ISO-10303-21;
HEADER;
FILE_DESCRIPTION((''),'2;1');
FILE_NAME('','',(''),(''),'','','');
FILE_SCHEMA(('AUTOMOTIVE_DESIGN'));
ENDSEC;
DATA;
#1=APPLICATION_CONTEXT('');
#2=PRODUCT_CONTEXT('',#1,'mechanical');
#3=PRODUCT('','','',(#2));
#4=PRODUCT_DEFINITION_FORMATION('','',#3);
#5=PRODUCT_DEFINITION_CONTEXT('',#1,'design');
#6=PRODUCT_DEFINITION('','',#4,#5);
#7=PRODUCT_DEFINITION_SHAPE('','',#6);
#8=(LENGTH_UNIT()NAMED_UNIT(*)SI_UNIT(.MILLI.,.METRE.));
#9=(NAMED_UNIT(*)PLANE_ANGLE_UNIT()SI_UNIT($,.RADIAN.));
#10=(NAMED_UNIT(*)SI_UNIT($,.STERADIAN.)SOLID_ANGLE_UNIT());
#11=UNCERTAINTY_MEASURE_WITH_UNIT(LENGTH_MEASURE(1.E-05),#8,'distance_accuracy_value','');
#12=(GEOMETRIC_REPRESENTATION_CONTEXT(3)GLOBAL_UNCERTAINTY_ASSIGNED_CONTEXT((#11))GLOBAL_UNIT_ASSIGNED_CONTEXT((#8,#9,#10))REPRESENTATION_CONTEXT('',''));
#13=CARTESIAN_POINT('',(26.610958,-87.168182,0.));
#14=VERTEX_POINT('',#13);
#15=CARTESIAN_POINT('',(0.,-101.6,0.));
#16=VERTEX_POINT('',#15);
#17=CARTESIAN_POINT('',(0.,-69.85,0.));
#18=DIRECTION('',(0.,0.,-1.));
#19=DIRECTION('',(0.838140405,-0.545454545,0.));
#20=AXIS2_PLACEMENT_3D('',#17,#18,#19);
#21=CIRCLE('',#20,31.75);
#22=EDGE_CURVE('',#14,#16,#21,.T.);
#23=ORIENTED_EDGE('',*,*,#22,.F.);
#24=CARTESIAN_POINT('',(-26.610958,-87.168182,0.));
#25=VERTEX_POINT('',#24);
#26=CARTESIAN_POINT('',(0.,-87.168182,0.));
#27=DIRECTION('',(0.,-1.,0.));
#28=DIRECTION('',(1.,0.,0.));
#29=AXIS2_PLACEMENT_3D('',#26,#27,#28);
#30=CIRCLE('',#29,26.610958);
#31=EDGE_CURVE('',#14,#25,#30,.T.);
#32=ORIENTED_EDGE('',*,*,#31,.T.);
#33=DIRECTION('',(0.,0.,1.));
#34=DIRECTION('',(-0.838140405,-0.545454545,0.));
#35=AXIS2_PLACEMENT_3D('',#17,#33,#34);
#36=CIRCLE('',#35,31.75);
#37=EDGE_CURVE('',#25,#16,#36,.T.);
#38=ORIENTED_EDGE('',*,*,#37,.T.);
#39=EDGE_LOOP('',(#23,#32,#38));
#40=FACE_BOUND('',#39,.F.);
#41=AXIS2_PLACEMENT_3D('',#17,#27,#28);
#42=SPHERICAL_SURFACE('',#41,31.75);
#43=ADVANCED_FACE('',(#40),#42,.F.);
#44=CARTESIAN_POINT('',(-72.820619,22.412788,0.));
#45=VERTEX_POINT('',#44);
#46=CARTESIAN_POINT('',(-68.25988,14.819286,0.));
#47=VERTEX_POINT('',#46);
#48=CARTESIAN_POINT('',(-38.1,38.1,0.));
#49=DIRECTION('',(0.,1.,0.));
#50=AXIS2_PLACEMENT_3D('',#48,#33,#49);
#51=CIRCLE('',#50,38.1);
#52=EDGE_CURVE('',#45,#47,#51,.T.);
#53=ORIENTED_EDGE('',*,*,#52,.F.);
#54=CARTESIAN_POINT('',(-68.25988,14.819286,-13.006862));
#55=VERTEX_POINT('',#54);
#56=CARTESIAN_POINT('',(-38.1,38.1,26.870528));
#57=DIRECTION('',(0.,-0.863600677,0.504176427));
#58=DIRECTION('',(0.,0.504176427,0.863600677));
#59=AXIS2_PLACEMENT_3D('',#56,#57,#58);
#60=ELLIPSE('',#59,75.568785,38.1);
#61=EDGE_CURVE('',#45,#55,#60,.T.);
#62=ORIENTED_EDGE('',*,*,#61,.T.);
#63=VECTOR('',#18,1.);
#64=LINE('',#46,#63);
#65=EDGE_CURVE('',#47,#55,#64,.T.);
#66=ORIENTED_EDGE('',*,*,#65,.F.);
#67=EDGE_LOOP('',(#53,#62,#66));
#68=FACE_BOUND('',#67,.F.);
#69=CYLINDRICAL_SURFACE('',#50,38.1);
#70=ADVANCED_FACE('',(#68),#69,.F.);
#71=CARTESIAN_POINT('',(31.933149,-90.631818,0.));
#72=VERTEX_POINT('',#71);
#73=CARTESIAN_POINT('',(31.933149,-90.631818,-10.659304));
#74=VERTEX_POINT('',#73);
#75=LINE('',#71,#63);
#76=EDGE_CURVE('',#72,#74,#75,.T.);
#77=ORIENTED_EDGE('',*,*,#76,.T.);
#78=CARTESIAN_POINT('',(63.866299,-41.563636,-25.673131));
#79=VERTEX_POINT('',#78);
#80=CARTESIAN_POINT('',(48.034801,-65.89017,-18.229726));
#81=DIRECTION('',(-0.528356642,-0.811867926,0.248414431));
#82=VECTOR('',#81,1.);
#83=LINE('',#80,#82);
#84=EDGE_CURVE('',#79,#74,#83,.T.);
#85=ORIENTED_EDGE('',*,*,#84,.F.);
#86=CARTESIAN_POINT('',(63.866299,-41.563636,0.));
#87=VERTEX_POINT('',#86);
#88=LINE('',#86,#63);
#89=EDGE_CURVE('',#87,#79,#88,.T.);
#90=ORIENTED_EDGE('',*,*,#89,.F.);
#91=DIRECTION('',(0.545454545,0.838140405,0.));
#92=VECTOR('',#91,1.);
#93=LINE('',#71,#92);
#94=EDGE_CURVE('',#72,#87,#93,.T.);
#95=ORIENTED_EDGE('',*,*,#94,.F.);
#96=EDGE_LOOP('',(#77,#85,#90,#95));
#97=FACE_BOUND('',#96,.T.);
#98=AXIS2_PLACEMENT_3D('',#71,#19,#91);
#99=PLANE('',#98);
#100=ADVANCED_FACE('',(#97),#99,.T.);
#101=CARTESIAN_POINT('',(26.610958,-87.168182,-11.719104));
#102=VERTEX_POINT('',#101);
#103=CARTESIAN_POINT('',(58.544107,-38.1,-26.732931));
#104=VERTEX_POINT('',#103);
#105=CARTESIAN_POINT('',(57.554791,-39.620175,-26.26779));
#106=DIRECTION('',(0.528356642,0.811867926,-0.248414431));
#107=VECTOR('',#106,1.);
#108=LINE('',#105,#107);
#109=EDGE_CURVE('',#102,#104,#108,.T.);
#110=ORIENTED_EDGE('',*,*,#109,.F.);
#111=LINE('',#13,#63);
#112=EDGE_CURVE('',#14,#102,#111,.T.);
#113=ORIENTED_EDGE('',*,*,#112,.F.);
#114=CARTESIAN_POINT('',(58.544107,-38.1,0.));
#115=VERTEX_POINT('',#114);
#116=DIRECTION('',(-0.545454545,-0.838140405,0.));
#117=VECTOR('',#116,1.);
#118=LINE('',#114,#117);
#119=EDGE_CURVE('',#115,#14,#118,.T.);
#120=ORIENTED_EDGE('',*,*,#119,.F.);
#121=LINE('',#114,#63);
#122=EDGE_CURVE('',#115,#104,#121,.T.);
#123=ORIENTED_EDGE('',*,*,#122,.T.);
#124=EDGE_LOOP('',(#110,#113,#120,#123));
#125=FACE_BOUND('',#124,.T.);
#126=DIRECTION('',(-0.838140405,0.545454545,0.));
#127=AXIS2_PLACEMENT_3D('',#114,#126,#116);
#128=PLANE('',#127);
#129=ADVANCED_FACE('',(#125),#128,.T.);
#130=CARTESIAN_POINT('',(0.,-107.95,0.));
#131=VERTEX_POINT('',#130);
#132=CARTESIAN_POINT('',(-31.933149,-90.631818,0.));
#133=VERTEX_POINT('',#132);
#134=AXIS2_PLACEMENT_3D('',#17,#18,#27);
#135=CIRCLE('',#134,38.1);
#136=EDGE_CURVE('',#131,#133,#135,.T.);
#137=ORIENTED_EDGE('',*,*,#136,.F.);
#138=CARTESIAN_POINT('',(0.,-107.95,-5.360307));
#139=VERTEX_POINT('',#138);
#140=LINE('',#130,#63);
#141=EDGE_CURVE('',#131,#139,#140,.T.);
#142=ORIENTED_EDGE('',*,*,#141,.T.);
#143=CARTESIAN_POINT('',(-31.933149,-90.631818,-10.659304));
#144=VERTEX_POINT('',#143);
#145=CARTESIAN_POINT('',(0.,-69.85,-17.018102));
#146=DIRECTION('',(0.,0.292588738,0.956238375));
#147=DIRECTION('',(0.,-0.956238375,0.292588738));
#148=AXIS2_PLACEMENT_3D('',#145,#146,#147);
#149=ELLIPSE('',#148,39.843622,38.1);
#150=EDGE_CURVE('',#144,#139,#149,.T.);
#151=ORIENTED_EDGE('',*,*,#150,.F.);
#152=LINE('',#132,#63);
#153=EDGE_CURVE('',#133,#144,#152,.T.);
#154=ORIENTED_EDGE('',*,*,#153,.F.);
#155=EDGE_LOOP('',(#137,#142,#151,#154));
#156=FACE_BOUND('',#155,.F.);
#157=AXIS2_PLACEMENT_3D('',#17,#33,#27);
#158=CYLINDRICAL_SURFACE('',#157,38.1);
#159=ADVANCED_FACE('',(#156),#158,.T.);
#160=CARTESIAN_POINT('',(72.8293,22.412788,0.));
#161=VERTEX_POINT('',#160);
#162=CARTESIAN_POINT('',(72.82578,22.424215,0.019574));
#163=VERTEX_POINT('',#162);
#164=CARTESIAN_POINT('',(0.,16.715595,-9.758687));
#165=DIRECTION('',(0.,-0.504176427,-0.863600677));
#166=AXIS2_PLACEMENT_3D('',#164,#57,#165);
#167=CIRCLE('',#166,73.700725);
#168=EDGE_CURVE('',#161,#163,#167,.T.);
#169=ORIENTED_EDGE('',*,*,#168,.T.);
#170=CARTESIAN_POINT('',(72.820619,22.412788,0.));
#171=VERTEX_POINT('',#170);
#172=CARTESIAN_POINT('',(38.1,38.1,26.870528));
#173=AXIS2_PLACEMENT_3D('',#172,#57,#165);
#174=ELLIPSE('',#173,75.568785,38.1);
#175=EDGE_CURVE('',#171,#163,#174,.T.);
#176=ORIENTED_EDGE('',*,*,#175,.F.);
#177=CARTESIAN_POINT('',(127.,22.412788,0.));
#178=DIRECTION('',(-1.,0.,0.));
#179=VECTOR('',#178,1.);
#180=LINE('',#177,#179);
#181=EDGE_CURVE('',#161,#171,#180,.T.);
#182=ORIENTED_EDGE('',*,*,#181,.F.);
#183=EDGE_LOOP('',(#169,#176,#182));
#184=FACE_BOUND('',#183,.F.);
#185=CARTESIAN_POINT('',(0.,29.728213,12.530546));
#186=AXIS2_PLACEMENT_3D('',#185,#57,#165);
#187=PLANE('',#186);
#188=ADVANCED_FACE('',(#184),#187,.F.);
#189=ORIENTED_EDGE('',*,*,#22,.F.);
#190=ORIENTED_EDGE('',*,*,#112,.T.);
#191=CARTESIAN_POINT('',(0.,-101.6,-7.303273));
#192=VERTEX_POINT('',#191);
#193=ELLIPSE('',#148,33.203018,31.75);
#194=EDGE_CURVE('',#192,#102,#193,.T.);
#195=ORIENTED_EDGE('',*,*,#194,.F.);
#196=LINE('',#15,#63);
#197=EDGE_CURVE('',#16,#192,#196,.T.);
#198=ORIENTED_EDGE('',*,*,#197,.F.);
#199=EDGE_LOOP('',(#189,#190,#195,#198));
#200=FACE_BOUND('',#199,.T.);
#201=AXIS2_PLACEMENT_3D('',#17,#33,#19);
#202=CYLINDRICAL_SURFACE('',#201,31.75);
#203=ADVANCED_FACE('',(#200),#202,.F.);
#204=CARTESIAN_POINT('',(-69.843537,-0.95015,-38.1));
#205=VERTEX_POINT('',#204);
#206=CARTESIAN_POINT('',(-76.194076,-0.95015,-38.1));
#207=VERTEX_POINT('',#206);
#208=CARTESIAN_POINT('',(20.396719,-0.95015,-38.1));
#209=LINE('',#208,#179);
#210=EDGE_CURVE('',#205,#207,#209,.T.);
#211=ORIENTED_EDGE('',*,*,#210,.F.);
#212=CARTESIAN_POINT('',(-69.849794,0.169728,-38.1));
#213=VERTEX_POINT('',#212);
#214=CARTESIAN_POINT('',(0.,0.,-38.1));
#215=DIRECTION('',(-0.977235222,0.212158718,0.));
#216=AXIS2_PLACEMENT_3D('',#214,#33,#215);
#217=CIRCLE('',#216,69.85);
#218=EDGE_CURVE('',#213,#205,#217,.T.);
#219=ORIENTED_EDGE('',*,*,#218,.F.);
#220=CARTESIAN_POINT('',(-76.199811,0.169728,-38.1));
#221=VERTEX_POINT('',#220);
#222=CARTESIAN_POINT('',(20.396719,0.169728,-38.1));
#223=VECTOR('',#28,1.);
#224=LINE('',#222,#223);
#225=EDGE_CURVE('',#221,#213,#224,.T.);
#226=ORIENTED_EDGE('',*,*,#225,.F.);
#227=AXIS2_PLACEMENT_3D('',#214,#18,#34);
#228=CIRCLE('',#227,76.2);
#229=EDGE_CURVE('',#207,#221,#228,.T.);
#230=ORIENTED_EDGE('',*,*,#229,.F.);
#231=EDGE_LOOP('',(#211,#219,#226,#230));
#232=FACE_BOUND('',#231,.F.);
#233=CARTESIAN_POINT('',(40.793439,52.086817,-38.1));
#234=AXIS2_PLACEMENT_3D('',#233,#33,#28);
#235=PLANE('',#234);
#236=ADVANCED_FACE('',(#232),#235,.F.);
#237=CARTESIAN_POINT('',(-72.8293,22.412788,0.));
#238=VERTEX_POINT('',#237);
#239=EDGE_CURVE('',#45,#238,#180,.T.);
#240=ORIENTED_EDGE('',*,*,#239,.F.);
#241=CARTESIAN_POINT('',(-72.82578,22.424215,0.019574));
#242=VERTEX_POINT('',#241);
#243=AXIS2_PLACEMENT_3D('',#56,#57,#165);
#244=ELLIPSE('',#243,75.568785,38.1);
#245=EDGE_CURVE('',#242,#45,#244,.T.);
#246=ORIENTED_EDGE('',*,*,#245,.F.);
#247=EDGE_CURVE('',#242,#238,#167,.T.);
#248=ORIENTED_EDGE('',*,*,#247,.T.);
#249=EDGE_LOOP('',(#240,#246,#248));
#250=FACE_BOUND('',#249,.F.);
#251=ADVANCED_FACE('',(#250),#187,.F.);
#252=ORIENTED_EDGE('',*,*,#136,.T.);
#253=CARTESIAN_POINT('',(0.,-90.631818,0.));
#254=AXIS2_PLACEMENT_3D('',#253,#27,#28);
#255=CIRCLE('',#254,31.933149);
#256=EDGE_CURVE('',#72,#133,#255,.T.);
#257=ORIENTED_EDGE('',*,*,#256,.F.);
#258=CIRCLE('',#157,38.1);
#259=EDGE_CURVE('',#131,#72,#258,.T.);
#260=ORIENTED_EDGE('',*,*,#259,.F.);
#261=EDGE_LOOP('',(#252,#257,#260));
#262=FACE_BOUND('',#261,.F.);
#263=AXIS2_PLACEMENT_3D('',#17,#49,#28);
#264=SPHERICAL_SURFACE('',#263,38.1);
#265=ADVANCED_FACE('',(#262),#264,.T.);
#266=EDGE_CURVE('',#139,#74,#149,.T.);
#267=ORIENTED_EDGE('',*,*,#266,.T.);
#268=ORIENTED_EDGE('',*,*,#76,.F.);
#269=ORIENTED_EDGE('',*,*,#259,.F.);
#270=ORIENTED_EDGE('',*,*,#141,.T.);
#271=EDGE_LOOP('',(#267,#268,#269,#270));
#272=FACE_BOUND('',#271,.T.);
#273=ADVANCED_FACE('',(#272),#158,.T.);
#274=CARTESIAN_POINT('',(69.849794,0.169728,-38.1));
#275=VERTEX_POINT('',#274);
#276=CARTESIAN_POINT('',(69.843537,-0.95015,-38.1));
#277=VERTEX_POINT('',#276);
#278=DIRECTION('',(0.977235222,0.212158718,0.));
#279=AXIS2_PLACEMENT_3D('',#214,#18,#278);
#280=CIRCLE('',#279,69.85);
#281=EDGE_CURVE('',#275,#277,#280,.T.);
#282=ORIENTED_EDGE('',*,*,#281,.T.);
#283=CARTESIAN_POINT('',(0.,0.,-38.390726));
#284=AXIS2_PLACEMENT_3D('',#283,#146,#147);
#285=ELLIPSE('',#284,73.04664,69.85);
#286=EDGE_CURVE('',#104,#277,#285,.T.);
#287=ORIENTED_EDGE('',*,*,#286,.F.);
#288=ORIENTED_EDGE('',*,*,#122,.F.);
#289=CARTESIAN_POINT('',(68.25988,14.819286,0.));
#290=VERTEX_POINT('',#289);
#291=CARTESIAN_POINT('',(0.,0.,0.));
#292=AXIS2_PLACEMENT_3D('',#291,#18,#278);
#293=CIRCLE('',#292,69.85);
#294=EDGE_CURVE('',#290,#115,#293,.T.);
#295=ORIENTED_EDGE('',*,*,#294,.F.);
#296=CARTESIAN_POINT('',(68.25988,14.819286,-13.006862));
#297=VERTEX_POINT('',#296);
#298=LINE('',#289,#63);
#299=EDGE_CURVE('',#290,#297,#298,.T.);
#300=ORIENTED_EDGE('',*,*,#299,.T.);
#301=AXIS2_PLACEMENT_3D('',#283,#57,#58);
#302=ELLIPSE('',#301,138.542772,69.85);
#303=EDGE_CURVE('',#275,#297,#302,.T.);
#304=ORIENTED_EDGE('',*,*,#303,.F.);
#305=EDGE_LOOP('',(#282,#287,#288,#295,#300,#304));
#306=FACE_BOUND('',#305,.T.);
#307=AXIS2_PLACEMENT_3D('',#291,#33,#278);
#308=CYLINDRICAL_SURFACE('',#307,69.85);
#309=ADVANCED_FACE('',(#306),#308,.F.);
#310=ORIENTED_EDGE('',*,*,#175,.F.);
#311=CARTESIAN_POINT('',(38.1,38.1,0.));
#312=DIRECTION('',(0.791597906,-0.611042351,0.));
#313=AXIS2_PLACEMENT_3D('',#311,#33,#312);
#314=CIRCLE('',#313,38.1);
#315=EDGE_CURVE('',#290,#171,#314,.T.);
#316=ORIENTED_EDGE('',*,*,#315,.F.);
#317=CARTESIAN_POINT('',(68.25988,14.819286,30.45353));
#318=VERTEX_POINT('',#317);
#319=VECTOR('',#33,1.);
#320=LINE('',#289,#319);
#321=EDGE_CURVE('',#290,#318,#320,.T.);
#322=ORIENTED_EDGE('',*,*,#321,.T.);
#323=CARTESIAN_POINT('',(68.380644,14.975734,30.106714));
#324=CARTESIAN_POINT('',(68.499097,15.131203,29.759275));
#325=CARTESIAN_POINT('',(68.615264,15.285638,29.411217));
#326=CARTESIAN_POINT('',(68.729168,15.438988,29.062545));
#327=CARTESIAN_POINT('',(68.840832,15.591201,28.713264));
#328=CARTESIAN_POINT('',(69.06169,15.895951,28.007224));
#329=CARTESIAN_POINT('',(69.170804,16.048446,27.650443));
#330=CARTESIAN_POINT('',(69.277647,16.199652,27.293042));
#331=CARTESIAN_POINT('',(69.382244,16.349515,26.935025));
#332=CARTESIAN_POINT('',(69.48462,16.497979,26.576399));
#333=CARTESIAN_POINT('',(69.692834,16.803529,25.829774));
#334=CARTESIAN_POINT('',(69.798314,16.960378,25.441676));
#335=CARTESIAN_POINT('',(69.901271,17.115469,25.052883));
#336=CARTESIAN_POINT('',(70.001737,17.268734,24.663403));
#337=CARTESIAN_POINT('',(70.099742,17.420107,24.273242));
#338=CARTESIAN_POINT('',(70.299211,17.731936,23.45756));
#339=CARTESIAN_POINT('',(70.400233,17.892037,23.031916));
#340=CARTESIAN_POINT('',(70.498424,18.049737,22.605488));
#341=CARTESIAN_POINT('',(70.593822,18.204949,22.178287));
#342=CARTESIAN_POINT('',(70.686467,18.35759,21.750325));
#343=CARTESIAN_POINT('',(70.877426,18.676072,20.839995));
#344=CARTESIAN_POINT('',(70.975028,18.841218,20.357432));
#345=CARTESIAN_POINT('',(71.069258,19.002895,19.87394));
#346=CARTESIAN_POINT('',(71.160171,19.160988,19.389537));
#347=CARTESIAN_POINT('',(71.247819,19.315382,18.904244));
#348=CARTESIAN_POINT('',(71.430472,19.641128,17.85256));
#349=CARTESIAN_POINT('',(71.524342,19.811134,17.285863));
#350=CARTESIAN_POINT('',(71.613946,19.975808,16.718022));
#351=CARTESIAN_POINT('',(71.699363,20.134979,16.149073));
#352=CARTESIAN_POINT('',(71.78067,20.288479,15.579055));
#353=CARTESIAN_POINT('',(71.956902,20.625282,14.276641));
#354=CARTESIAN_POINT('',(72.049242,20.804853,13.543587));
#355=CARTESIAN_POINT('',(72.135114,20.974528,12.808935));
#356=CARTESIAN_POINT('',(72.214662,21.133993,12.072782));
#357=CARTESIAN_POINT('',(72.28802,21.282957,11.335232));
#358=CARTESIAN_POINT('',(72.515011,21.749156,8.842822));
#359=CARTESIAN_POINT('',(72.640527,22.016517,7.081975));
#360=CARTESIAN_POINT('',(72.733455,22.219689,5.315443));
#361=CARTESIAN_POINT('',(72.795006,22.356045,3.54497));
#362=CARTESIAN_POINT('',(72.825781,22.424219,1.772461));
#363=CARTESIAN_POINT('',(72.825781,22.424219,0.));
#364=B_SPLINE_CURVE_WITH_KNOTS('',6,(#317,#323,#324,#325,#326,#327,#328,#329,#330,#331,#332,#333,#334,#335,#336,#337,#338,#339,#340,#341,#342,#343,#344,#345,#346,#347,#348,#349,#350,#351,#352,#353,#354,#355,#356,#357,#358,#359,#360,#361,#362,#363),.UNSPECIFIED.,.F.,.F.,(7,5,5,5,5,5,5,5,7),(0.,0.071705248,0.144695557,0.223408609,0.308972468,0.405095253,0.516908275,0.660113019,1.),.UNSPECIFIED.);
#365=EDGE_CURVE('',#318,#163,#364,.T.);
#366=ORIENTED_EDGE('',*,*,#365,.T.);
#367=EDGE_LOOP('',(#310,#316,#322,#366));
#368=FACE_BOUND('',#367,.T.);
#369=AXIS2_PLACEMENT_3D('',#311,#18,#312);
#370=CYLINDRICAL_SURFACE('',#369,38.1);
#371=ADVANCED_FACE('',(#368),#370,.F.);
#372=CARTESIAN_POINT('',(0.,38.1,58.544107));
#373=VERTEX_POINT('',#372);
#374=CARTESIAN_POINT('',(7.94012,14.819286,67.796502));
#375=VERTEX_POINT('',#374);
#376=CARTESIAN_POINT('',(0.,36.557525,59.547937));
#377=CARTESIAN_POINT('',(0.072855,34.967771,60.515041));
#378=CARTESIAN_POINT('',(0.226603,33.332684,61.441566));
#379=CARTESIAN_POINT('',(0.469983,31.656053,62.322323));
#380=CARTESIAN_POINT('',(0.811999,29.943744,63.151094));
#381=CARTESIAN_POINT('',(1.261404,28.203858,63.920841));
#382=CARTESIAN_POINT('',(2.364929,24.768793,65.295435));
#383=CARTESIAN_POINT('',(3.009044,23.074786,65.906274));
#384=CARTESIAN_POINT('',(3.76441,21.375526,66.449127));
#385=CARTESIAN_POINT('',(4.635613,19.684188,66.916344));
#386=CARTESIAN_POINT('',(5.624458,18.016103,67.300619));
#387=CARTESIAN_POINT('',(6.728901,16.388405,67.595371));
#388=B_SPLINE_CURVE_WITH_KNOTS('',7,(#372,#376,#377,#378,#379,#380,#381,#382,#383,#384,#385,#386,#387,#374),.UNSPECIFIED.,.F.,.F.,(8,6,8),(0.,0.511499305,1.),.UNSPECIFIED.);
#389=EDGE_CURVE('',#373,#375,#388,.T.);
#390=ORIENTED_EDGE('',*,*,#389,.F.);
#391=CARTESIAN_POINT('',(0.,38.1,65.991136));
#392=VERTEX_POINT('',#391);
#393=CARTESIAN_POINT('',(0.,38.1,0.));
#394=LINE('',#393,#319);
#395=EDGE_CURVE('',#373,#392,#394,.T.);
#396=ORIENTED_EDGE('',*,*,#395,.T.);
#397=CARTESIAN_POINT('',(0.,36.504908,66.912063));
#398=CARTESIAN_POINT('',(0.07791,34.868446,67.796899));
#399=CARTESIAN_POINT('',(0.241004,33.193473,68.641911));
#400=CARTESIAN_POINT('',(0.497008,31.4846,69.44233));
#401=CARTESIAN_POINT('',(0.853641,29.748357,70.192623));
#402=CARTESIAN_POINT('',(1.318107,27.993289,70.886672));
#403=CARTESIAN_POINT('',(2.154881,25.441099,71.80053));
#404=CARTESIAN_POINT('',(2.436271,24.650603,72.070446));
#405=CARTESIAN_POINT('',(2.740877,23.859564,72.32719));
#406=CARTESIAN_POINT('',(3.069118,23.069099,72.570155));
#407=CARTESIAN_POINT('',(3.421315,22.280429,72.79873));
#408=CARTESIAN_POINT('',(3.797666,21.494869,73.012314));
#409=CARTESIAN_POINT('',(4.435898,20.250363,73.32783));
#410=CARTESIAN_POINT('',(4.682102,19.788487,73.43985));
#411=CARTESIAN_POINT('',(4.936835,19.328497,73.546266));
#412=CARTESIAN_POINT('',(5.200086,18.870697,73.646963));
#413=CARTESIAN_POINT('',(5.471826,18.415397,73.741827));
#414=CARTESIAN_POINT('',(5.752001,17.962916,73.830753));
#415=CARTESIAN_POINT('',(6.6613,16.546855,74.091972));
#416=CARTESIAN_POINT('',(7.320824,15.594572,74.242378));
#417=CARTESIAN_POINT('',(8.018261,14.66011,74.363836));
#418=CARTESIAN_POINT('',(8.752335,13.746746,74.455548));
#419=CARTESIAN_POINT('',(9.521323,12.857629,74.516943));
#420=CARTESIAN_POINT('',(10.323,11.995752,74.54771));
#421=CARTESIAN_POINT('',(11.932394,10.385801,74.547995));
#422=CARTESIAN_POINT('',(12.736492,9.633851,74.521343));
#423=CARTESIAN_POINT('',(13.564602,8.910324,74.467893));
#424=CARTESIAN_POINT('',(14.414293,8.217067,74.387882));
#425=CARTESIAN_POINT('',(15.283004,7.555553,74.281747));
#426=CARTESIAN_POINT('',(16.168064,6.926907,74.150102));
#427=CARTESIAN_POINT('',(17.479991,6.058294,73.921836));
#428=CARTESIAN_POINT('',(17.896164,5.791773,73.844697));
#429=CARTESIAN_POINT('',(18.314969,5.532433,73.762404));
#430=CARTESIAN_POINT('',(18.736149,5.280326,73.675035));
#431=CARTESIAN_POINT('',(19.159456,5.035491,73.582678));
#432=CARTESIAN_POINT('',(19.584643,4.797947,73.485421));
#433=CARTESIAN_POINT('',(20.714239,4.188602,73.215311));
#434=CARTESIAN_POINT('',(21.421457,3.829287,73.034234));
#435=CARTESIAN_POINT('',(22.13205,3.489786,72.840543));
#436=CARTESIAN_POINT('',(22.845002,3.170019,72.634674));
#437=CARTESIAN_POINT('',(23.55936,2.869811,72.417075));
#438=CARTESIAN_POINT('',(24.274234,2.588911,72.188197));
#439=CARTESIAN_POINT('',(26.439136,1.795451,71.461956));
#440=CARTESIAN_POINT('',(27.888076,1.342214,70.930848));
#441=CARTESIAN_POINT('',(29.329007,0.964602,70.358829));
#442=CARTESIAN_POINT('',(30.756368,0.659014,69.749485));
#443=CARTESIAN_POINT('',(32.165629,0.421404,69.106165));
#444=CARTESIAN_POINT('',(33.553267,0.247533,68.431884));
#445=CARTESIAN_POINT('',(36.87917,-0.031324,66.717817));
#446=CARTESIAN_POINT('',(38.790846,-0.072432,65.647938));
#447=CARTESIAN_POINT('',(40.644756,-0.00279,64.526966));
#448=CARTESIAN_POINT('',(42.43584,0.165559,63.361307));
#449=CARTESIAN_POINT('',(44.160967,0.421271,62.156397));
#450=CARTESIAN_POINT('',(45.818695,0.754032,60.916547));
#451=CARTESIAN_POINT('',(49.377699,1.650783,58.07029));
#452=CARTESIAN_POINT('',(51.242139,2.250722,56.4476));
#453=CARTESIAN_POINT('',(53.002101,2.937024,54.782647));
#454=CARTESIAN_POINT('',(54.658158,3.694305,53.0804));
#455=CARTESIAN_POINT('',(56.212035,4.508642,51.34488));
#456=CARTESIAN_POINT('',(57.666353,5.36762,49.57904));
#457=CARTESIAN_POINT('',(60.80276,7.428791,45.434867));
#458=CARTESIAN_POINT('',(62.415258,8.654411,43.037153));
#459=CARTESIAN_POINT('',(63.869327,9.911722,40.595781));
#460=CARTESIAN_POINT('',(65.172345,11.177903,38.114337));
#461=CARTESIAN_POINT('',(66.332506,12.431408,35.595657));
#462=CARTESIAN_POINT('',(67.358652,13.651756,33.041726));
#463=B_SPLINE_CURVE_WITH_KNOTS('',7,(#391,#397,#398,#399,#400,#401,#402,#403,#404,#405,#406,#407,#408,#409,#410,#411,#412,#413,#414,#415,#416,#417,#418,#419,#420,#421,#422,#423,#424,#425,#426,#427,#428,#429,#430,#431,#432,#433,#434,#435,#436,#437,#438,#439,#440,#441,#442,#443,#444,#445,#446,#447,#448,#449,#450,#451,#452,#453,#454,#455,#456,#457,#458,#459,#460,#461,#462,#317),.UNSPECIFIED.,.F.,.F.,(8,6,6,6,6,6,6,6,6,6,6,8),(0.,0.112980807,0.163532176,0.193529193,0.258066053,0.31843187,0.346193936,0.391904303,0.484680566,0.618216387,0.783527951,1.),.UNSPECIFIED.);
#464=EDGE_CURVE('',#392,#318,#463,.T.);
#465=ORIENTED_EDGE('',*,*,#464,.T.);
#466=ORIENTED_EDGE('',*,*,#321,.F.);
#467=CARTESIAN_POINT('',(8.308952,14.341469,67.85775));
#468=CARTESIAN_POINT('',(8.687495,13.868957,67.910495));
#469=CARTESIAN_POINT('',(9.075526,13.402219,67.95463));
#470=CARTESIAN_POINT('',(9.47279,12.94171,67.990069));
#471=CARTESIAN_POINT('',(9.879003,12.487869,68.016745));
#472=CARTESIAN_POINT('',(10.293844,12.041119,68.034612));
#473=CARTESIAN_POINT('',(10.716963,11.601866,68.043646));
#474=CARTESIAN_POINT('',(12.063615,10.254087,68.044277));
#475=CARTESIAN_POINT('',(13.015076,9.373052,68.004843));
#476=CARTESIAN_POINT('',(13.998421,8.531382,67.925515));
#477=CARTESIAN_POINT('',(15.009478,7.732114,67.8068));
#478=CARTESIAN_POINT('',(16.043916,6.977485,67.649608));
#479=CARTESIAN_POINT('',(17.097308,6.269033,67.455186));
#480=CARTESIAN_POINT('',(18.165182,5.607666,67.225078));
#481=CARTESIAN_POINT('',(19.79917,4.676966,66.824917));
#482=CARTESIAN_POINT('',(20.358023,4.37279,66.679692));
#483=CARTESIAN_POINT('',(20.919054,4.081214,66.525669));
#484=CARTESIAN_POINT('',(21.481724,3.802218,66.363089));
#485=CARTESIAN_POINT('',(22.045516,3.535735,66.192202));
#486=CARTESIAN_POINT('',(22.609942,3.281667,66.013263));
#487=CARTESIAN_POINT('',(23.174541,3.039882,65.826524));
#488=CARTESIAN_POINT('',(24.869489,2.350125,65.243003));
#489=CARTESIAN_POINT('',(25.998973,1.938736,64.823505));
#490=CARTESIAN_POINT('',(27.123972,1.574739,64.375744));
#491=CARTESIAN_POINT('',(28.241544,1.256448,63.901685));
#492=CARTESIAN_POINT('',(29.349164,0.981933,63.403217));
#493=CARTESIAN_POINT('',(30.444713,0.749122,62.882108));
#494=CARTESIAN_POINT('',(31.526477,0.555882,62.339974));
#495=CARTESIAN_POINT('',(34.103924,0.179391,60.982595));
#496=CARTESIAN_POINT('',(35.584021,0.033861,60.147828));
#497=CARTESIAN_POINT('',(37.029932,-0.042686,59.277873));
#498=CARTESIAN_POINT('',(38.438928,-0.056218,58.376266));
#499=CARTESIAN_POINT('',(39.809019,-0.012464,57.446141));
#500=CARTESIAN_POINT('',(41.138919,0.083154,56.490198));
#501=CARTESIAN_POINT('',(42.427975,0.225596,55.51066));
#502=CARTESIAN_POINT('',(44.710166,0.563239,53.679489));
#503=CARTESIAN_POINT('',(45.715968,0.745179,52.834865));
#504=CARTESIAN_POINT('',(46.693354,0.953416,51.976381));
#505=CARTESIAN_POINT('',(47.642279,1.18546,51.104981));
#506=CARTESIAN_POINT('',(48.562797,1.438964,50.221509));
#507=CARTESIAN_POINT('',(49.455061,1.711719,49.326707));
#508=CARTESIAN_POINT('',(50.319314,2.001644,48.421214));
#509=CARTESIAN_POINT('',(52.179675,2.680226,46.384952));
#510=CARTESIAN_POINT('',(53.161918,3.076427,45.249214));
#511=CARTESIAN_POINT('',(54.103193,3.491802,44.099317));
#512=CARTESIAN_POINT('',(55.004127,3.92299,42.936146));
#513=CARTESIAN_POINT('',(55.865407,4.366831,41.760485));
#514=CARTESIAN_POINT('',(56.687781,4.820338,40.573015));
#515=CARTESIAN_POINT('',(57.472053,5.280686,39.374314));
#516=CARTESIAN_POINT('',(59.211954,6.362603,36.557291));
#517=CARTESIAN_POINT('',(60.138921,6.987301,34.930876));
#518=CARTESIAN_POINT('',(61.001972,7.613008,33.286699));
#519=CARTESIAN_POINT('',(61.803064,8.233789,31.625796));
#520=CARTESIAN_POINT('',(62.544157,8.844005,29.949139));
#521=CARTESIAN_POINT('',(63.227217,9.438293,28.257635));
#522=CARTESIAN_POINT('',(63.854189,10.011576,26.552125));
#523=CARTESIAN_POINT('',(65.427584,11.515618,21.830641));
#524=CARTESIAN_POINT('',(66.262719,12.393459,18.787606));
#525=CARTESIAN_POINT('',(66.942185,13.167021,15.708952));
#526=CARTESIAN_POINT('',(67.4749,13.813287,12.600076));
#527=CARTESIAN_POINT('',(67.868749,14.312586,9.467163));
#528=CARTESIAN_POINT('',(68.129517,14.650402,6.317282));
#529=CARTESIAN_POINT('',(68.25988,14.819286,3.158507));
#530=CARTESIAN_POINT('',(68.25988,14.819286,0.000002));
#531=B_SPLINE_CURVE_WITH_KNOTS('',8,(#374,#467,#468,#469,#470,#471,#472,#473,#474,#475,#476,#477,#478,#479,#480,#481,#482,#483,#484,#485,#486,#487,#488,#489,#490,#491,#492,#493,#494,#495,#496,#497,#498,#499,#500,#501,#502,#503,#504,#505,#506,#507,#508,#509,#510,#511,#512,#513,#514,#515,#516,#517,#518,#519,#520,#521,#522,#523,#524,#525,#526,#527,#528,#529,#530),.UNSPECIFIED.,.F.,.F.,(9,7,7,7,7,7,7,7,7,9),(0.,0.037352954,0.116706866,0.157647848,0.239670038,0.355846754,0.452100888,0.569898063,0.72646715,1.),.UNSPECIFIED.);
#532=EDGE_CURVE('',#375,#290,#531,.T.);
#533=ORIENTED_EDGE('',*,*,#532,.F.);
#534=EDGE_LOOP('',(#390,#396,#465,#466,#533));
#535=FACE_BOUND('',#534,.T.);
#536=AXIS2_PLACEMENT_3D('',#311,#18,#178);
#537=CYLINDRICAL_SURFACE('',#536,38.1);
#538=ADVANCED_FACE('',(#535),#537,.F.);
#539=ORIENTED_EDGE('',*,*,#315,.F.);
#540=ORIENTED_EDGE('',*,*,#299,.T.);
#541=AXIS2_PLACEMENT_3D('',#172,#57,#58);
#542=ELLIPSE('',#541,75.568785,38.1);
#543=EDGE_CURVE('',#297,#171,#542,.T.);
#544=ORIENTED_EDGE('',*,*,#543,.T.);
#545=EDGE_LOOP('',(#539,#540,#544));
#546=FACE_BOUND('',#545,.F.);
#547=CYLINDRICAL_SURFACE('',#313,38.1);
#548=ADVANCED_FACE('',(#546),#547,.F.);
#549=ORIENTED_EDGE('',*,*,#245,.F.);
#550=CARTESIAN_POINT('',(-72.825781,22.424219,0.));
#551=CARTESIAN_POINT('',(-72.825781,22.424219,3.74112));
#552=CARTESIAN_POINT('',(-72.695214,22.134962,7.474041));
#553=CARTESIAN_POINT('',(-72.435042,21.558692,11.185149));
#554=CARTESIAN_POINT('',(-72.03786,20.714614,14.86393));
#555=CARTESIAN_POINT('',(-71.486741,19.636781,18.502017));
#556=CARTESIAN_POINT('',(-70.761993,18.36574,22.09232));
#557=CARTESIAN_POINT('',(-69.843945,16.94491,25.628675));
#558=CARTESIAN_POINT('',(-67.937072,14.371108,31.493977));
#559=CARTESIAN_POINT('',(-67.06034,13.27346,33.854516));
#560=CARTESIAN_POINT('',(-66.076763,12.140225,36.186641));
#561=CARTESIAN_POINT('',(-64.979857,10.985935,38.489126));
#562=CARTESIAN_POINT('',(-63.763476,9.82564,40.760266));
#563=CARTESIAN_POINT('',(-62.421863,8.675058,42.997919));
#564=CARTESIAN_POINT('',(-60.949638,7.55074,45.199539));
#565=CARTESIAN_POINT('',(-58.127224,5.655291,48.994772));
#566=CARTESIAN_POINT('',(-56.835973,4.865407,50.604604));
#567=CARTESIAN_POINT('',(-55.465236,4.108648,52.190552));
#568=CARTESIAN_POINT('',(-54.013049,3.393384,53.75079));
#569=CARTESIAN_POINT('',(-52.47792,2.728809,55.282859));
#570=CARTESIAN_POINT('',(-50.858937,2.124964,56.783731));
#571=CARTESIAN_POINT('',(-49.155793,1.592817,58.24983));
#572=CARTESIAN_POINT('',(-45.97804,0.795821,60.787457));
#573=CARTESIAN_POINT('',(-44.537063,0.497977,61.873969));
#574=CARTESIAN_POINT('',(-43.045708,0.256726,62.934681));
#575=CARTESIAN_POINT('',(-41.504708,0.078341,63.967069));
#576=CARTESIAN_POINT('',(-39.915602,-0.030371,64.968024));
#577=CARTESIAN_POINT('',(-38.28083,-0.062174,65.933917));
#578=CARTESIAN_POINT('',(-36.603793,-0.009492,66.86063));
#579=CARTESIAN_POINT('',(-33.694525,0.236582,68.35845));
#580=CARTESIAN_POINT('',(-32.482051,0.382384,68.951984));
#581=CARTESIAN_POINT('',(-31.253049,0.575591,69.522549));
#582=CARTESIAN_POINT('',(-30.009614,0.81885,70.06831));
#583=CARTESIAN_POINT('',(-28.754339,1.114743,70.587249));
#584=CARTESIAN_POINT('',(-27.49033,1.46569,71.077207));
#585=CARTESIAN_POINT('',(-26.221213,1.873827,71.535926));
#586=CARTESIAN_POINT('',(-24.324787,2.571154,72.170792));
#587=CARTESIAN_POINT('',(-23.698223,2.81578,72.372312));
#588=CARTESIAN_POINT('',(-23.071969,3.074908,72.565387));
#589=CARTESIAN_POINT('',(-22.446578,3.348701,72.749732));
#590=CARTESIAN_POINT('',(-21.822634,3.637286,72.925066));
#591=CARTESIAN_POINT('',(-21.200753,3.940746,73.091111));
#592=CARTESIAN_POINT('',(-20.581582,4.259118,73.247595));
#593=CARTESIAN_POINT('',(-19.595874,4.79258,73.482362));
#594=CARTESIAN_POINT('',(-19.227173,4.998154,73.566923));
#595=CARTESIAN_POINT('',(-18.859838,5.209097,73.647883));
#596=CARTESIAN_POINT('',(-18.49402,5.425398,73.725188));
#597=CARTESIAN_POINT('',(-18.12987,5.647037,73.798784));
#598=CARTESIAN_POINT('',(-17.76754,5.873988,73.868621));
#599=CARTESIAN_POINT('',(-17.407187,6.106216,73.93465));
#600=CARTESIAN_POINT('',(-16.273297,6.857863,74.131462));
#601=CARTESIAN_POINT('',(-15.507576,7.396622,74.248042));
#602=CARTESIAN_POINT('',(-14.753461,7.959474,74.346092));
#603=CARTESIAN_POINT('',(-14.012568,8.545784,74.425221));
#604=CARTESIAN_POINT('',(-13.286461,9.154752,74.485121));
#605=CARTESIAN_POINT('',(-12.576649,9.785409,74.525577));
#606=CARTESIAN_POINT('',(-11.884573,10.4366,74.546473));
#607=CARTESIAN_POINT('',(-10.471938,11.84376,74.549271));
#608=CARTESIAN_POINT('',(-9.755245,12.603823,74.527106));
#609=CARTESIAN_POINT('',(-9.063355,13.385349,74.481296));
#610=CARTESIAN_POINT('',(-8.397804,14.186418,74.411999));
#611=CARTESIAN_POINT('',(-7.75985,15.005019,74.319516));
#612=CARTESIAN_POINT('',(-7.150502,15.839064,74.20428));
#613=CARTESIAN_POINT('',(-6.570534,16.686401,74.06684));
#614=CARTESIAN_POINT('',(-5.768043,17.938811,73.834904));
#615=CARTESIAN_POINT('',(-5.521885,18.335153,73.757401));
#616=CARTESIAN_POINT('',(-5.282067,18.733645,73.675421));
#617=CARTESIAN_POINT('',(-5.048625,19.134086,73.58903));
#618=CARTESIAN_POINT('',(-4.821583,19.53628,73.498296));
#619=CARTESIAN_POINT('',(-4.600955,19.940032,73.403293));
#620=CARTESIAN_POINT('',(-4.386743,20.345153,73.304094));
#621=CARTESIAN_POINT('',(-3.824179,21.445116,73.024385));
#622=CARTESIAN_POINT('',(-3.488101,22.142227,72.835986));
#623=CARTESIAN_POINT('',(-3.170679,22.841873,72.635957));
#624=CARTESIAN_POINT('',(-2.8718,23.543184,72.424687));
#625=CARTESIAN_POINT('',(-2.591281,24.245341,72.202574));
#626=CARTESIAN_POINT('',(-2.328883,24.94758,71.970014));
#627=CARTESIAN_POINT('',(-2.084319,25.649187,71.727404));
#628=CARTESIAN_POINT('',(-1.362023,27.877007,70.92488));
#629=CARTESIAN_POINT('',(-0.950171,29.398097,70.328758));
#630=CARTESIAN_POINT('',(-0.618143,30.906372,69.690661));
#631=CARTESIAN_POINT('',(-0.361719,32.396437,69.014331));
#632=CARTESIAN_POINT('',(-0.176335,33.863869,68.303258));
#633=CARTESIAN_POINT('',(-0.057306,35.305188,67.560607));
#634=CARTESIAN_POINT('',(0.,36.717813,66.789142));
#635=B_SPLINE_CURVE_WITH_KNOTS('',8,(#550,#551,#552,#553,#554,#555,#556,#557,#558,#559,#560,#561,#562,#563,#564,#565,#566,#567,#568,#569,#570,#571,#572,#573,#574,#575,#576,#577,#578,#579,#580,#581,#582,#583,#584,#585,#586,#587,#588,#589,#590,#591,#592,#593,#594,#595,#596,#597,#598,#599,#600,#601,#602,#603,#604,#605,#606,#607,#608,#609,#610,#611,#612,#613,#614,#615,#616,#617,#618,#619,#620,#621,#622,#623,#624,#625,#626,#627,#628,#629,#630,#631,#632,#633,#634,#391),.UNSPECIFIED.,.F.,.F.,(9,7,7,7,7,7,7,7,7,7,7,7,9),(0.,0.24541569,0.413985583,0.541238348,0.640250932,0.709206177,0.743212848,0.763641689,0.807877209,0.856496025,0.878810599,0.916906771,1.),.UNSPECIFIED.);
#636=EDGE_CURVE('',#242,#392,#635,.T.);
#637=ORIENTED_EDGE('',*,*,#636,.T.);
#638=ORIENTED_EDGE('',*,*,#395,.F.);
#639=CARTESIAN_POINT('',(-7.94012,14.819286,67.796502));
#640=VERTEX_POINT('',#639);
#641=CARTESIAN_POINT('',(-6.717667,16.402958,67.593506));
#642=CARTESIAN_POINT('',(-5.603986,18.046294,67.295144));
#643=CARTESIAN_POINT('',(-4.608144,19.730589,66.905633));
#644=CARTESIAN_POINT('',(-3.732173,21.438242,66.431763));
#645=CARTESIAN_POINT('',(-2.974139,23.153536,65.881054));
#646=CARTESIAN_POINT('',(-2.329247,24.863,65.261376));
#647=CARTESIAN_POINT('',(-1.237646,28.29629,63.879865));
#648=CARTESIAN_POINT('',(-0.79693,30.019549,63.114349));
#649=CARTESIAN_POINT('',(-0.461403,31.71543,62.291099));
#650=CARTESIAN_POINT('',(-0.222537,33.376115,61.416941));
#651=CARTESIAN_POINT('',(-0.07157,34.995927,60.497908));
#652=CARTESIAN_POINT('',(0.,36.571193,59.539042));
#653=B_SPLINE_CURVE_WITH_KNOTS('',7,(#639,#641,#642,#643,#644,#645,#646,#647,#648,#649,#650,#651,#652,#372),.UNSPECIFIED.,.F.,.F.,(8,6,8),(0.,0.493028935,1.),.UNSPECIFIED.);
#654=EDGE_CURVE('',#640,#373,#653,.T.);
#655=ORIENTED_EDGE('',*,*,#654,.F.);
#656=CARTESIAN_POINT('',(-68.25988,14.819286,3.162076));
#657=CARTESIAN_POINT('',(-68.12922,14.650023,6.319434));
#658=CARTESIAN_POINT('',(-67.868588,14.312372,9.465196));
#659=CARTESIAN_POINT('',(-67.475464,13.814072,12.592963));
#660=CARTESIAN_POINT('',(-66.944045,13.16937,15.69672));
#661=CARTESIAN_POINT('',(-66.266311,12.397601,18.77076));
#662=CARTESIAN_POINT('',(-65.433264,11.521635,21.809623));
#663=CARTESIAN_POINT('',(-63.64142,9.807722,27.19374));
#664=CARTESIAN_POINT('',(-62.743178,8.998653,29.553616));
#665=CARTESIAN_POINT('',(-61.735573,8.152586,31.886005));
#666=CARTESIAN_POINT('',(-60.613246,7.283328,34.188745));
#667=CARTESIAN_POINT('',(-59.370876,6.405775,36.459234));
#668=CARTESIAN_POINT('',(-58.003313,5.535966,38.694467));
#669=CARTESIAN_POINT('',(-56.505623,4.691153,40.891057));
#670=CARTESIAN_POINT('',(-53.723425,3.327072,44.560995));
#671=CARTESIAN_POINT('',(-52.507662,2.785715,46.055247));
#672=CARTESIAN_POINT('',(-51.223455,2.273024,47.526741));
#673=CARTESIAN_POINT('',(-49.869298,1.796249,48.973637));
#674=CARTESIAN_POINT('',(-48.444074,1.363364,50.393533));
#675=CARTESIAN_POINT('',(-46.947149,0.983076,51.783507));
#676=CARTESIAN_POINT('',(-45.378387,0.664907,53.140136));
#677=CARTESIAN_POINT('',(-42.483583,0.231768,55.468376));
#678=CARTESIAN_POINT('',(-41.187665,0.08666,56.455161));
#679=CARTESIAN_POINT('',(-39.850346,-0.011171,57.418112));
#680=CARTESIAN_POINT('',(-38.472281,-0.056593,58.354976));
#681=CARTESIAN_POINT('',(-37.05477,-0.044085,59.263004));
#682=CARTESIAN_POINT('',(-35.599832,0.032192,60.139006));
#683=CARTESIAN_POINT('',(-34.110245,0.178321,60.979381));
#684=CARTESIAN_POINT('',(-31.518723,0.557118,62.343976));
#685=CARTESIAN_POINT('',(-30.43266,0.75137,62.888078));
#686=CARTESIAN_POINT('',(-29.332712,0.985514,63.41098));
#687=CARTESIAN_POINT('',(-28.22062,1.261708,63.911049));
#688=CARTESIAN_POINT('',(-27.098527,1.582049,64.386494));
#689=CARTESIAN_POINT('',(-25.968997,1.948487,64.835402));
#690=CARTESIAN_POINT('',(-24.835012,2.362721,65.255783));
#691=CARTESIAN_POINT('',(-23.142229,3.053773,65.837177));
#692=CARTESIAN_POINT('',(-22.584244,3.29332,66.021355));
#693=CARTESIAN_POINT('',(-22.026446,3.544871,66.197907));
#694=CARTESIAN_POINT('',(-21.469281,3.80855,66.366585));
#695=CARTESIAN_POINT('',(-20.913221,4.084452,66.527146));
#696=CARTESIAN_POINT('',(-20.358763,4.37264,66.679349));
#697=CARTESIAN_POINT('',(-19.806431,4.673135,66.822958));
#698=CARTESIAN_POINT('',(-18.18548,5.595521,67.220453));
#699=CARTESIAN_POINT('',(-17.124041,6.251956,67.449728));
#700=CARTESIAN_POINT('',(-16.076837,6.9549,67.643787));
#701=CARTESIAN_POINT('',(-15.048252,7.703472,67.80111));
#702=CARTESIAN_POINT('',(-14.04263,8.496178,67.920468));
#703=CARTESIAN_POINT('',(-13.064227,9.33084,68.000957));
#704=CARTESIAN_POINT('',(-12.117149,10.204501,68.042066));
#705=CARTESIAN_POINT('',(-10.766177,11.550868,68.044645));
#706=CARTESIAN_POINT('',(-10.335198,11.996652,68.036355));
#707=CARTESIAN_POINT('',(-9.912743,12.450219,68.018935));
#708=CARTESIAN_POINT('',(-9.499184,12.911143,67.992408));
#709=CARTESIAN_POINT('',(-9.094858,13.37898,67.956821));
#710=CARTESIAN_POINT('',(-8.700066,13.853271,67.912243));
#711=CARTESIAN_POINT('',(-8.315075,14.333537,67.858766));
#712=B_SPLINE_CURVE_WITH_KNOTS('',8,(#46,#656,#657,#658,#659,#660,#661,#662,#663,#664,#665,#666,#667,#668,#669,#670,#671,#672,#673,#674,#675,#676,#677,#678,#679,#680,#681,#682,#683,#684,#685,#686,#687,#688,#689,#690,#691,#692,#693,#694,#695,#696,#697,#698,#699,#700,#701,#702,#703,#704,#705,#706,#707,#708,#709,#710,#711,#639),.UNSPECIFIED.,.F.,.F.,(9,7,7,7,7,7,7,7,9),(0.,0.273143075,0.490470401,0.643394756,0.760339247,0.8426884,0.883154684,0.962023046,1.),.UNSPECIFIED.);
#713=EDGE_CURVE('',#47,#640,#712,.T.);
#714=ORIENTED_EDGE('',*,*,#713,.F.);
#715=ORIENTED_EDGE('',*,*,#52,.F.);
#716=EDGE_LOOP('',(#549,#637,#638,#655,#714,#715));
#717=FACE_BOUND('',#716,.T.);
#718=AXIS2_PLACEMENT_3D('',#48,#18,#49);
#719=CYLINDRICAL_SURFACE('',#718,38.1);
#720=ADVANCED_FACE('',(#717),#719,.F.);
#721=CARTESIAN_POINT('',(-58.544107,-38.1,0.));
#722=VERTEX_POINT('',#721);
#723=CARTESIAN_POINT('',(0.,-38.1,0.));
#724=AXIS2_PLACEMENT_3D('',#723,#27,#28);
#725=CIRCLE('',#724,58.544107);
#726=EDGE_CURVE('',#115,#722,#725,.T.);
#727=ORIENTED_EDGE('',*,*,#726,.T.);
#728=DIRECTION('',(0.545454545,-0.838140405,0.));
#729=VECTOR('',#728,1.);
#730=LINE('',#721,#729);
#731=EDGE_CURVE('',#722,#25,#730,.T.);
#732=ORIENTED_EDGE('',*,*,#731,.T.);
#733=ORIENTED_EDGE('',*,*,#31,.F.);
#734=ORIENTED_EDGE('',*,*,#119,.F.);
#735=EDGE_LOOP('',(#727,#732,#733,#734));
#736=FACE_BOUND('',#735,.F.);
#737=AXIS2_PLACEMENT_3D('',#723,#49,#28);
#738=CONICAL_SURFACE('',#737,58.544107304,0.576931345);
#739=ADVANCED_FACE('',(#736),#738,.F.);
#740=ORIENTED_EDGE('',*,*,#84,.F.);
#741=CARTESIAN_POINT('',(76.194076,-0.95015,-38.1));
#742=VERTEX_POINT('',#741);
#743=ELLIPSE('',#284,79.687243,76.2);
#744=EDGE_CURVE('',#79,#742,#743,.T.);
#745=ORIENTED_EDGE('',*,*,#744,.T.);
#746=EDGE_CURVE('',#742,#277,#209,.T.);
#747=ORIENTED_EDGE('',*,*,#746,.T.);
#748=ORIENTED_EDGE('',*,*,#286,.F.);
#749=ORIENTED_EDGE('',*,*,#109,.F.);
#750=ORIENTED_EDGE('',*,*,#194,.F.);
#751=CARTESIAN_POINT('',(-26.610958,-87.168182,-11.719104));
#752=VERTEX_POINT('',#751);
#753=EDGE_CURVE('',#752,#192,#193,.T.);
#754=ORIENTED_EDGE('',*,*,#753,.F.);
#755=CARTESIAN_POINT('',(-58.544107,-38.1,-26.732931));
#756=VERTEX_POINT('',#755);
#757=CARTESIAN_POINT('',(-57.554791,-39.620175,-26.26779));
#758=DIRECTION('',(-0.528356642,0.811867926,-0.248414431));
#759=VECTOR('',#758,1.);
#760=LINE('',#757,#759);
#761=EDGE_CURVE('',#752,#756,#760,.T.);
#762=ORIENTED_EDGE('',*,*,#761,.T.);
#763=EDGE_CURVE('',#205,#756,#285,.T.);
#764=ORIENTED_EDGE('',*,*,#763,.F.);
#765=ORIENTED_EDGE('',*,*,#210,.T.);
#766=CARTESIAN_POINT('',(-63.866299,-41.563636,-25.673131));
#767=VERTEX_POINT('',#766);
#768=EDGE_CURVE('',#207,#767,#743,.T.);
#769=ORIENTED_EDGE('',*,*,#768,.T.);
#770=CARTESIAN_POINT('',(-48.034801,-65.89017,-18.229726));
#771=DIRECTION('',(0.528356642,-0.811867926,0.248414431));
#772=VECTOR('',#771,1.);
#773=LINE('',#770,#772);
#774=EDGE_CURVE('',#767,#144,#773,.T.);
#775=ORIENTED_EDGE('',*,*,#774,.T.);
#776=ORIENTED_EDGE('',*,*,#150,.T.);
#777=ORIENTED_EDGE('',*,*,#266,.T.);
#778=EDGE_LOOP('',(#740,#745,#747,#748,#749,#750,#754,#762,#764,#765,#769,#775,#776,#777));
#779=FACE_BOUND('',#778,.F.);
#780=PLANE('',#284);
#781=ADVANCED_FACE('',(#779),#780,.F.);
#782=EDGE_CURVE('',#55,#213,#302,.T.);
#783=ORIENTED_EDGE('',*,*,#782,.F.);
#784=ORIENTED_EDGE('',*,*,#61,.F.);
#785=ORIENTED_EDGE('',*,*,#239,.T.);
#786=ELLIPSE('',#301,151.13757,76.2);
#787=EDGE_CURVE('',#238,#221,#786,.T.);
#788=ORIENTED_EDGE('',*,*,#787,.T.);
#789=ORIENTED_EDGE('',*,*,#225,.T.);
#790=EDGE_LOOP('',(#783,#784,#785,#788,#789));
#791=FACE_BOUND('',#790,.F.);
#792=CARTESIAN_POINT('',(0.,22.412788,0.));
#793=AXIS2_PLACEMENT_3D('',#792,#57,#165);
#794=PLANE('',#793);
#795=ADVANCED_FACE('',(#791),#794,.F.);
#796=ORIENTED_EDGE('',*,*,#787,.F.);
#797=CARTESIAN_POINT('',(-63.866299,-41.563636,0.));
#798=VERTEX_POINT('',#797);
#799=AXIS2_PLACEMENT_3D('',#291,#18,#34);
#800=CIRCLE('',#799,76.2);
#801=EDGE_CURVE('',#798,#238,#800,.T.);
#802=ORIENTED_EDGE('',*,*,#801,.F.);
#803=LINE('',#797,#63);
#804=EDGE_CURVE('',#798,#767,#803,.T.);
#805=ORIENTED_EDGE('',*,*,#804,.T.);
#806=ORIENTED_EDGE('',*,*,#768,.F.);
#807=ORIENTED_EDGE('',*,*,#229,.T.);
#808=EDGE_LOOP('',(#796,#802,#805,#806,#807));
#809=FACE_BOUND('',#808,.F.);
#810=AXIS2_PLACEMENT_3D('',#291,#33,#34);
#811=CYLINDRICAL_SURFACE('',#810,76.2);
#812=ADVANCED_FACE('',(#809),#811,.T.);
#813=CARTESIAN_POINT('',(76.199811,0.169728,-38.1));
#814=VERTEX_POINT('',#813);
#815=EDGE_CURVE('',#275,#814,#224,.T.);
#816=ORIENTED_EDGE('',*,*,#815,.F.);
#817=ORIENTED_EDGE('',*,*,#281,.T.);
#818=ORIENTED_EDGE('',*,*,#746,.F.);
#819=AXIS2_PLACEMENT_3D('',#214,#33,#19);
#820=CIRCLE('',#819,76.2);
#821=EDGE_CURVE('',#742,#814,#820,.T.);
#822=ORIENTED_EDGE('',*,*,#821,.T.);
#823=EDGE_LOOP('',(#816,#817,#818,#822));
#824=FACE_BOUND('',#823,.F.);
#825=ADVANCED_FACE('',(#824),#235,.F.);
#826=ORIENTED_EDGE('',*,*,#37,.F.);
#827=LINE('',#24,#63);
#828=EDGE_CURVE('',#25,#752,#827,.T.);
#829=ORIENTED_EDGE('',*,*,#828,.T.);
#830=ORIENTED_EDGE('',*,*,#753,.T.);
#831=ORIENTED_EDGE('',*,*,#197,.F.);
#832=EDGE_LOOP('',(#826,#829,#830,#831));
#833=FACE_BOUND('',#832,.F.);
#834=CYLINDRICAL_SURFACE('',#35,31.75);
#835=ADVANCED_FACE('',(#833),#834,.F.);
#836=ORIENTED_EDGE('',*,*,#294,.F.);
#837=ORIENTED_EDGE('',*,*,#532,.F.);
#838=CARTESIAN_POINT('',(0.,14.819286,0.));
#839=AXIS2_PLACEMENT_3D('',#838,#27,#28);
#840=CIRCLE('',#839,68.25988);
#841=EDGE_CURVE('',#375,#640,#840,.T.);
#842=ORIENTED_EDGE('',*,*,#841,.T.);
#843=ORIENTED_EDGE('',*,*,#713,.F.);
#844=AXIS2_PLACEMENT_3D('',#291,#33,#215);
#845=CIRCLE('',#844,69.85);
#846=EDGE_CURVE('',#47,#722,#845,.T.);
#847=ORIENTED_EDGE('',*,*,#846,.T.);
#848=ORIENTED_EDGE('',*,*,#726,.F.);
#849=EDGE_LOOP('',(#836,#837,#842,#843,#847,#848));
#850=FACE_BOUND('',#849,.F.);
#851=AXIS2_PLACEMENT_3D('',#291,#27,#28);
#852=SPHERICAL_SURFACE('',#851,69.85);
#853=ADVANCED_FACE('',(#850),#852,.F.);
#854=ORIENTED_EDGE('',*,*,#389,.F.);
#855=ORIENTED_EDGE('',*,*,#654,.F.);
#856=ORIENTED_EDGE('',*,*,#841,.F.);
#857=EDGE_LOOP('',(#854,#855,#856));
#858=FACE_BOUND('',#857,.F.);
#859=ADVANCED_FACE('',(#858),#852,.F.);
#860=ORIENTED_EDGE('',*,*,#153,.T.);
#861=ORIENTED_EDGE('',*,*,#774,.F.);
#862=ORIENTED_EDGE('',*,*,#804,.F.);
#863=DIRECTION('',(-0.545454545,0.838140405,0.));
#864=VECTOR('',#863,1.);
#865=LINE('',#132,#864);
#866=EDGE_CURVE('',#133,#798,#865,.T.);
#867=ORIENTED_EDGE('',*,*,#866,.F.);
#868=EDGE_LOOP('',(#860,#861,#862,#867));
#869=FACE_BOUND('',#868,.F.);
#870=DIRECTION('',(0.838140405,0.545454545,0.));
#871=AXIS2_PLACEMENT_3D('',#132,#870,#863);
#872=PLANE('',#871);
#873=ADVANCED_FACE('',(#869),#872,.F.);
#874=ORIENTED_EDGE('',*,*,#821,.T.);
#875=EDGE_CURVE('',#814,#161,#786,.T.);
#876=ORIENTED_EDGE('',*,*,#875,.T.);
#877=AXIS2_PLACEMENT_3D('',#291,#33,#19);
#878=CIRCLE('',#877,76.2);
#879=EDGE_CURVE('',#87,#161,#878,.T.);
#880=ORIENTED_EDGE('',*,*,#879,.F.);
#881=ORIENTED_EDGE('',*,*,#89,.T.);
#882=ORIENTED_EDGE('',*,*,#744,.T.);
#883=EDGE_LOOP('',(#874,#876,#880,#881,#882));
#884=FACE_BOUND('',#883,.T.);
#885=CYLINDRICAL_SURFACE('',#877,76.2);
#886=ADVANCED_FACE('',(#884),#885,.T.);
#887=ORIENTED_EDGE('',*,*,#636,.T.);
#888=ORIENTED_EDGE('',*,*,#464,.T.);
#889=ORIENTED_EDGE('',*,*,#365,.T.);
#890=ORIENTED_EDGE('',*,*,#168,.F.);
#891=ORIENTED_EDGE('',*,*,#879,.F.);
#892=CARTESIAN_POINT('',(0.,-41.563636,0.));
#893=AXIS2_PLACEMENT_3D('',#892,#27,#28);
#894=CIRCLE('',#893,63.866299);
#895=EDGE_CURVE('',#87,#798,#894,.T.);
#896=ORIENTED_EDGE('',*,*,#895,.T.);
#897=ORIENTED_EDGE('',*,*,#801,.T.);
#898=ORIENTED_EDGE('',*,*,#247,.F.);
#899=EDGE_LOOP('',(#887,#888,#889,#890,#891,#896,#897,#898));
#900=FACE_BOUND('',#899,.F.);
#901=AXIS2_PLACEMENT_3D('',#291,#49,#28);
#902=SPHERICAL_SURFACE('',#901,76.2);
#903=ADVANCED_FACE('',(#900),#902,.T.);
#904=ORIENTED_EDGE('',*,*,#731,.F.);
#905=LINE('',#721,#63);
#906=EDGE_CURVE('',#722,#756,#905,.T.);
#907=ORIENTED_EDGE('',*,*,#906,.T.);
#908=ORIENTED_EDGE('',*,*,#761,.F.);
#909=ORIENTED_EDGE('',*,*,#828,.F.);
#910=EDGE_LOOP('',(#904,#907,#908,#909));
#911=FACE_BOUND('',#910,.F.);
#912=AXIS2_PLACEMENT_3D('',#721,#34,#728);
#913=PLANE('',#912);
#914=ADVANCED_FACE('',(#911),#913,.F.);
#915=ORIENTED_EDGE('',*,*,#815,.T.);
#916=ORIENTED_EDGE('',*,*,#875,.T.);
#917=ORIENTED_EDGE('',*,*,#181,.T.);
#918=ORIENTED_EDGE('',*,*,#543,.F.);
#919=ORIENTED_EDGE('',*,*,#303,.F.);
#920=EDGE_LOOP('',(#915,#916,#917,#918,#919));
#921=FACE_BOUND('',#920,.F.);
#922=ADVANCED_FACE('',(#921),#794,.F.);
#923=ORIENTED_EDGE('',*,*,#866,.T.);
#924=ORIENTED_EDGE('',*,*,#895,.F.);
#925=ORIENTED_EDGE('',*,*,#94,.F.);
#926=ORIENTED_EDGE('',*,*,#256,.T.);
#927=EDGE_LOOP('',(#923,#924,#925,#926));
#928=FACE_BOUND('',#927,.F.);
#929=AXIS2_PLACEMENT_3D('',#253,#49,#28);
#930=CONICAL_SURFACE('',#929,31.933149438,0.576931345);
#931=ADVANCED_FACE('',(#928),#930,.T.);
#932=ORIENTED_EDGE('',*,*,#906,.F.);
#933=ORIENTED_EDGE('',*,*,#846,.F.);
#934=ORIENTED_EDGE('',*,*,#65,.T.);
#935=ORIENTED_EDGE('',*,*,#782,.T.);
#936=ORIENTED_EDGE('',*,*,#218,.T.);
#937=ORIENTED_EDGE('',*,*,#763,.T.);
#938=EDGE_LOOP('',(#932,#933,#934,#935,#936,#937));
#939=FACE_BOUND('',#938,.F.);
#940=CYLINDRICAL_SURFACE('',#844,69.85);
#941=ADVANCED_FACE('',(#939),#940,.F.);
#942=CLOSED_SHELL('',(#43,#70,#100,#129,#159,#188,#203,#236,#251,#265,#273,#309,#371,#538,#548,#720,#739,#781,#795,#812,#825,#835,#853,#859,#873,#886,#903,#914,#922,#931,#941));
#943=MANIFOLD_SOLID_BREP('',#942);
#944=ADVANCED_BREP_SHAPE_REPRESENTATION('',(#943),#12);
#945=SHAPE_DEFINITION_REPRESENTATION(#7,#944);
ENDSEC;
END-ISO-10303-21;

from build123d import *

# Parameters (mm, degrees)
F1_ANGLE = 180
F2_DEPTH = 76.201
F3_DEPTH = 38.1
F5_DEPTH = 127


# Not quite as in the source:
# - a feature names something its author has since deleted; it is built from what else it names


with BuildPart() as f1:
    # F0 (on Top) → F1 (revolve)
    with BuildSketch(Plane.XY):
        with BuildLine():
            ThreePointArc((0, 69.85), (43.8400236241, 54.3789925306), (68.2598802346, 14.819286432))
            ThreePointArc((68.2598802346, 14.819286432), (70.7649049458, 18.4884221725), (72.8257812379, 22.4242187621))
            ThreePointArc((72.8257812379, 22.4242187621), (45.2643045364, 61.299125074), (0, 76.2))
            Line((0, 76.2), (0, 69.85))
        make_face()
        with BuildLine():
            Line((58.5441073038, -38.1), (26.6109578654, -87.1681818182))
            ThreePointArc((26.6109578654, -87.1681818182), (15.1362186043, -97.7598080675), (0, -101.6))
            Line((0, -101.6), (0, -107.95))
            ThreePointArc((0, -107.95), (18.1634623251, -103.341769681), (31.9331494384, -90.6318181818))
            Line((31.9331494384, -90.6318181818), (63.8662988769, -41.5636363636))
            ThreePointArc((63.8662988769, -41.5636363636), (75.4638495733, -10.5663336866), (72.8257812379, 22.4242187621))
            ThreePointArc((72.8257812379, 22.4242187621), (70.7649049458, 18.4884221725), (68.2598802346, 14.819286432))
            ThreePointArc((68.2598802346, 14.819286432), (68.7017141928, -12.6133646173), (58.5441073038, -38.1))
        make_face()
    revolve(axis=Axis((0, -12.7, 0), (0, -1, 0)), revolution_arc=F1_ANGLE)

    # F0 (on Top) → F2 (cut, through all)
    with BuildSketch(Plane.XY):
        with BuildLine():
            ThreePointArc((0, 38.1), (25.8012487817, 2.0396239832), (68.2598802346, 14.819286432))
            ThreePointArc((68.2598802346, 14.819286432), (43.8400236241, 54.3789925306), (0, 69.85))
            Line((0, 69.85), (0, 76.2))
            ThreePointArc((0, 76.2), (45.2643045364, 61.299125074), (72.8257812379, 22.4242187621))
            ThreePointArc((72.8257812379, 22.4242187621), (70.1066966834, 58.7683663461), (38.1, 76.2))
            ThreePointArc((38.1, 76.2), (0, 114.3), (-38.1, 76.2))
            ThreePointArc((-38.1, 76.2), (-65.0407683632, 11.1592316368), (0, 38.1))
        make_face()
        with BuildLine():
            ThreePointArc((0, 69.85), (43.8400236241, 54.3789925306), (68.2598802346, 14.819286432))
            ThreePointArc((68.2598802346, 14.819286432), (70.7649049458, 18.4884221725), (72.8257812379, 22.4242187621))
            ThreePointArc((72.8257812379, 22.4242187621), (45.2643045364, 61.299125074), (0, 76.2))
            Line((0, 76.2), (0, 69.85))
        make_face()
    extrude(amount=F2_DEPTH, mode=Mode.SUBTRACT)

    # F3 (add): a face of the model
    f3_faces = [f1.faces().sort_by_distance(p)[0] for p in [
        (72.4843753918, 17.4560748099, 0),
    ]]
    extrude(f3_faces, amount=F3_DEPTH)

    # F4 (on Right) → F5 (cut, symmetric)
    with BuildSketch(Plane.YZ):
        Polygon((22.4127881229, 0), (0, -38.3907258511), (-2.2853469058, -42.3052824003), (29.7282127851, -42.3052824003), (29.7282127851, 12.5305455596), align=None)
        Polygon((-125.4685521126, -38.3907258511), (0, -38.3907258511), (-125.4685521126, 0), align=None)
    extrude(amount=F5_DEPTH, both=True, mode=Mode.SUBTRACT)


solid = f1.part
